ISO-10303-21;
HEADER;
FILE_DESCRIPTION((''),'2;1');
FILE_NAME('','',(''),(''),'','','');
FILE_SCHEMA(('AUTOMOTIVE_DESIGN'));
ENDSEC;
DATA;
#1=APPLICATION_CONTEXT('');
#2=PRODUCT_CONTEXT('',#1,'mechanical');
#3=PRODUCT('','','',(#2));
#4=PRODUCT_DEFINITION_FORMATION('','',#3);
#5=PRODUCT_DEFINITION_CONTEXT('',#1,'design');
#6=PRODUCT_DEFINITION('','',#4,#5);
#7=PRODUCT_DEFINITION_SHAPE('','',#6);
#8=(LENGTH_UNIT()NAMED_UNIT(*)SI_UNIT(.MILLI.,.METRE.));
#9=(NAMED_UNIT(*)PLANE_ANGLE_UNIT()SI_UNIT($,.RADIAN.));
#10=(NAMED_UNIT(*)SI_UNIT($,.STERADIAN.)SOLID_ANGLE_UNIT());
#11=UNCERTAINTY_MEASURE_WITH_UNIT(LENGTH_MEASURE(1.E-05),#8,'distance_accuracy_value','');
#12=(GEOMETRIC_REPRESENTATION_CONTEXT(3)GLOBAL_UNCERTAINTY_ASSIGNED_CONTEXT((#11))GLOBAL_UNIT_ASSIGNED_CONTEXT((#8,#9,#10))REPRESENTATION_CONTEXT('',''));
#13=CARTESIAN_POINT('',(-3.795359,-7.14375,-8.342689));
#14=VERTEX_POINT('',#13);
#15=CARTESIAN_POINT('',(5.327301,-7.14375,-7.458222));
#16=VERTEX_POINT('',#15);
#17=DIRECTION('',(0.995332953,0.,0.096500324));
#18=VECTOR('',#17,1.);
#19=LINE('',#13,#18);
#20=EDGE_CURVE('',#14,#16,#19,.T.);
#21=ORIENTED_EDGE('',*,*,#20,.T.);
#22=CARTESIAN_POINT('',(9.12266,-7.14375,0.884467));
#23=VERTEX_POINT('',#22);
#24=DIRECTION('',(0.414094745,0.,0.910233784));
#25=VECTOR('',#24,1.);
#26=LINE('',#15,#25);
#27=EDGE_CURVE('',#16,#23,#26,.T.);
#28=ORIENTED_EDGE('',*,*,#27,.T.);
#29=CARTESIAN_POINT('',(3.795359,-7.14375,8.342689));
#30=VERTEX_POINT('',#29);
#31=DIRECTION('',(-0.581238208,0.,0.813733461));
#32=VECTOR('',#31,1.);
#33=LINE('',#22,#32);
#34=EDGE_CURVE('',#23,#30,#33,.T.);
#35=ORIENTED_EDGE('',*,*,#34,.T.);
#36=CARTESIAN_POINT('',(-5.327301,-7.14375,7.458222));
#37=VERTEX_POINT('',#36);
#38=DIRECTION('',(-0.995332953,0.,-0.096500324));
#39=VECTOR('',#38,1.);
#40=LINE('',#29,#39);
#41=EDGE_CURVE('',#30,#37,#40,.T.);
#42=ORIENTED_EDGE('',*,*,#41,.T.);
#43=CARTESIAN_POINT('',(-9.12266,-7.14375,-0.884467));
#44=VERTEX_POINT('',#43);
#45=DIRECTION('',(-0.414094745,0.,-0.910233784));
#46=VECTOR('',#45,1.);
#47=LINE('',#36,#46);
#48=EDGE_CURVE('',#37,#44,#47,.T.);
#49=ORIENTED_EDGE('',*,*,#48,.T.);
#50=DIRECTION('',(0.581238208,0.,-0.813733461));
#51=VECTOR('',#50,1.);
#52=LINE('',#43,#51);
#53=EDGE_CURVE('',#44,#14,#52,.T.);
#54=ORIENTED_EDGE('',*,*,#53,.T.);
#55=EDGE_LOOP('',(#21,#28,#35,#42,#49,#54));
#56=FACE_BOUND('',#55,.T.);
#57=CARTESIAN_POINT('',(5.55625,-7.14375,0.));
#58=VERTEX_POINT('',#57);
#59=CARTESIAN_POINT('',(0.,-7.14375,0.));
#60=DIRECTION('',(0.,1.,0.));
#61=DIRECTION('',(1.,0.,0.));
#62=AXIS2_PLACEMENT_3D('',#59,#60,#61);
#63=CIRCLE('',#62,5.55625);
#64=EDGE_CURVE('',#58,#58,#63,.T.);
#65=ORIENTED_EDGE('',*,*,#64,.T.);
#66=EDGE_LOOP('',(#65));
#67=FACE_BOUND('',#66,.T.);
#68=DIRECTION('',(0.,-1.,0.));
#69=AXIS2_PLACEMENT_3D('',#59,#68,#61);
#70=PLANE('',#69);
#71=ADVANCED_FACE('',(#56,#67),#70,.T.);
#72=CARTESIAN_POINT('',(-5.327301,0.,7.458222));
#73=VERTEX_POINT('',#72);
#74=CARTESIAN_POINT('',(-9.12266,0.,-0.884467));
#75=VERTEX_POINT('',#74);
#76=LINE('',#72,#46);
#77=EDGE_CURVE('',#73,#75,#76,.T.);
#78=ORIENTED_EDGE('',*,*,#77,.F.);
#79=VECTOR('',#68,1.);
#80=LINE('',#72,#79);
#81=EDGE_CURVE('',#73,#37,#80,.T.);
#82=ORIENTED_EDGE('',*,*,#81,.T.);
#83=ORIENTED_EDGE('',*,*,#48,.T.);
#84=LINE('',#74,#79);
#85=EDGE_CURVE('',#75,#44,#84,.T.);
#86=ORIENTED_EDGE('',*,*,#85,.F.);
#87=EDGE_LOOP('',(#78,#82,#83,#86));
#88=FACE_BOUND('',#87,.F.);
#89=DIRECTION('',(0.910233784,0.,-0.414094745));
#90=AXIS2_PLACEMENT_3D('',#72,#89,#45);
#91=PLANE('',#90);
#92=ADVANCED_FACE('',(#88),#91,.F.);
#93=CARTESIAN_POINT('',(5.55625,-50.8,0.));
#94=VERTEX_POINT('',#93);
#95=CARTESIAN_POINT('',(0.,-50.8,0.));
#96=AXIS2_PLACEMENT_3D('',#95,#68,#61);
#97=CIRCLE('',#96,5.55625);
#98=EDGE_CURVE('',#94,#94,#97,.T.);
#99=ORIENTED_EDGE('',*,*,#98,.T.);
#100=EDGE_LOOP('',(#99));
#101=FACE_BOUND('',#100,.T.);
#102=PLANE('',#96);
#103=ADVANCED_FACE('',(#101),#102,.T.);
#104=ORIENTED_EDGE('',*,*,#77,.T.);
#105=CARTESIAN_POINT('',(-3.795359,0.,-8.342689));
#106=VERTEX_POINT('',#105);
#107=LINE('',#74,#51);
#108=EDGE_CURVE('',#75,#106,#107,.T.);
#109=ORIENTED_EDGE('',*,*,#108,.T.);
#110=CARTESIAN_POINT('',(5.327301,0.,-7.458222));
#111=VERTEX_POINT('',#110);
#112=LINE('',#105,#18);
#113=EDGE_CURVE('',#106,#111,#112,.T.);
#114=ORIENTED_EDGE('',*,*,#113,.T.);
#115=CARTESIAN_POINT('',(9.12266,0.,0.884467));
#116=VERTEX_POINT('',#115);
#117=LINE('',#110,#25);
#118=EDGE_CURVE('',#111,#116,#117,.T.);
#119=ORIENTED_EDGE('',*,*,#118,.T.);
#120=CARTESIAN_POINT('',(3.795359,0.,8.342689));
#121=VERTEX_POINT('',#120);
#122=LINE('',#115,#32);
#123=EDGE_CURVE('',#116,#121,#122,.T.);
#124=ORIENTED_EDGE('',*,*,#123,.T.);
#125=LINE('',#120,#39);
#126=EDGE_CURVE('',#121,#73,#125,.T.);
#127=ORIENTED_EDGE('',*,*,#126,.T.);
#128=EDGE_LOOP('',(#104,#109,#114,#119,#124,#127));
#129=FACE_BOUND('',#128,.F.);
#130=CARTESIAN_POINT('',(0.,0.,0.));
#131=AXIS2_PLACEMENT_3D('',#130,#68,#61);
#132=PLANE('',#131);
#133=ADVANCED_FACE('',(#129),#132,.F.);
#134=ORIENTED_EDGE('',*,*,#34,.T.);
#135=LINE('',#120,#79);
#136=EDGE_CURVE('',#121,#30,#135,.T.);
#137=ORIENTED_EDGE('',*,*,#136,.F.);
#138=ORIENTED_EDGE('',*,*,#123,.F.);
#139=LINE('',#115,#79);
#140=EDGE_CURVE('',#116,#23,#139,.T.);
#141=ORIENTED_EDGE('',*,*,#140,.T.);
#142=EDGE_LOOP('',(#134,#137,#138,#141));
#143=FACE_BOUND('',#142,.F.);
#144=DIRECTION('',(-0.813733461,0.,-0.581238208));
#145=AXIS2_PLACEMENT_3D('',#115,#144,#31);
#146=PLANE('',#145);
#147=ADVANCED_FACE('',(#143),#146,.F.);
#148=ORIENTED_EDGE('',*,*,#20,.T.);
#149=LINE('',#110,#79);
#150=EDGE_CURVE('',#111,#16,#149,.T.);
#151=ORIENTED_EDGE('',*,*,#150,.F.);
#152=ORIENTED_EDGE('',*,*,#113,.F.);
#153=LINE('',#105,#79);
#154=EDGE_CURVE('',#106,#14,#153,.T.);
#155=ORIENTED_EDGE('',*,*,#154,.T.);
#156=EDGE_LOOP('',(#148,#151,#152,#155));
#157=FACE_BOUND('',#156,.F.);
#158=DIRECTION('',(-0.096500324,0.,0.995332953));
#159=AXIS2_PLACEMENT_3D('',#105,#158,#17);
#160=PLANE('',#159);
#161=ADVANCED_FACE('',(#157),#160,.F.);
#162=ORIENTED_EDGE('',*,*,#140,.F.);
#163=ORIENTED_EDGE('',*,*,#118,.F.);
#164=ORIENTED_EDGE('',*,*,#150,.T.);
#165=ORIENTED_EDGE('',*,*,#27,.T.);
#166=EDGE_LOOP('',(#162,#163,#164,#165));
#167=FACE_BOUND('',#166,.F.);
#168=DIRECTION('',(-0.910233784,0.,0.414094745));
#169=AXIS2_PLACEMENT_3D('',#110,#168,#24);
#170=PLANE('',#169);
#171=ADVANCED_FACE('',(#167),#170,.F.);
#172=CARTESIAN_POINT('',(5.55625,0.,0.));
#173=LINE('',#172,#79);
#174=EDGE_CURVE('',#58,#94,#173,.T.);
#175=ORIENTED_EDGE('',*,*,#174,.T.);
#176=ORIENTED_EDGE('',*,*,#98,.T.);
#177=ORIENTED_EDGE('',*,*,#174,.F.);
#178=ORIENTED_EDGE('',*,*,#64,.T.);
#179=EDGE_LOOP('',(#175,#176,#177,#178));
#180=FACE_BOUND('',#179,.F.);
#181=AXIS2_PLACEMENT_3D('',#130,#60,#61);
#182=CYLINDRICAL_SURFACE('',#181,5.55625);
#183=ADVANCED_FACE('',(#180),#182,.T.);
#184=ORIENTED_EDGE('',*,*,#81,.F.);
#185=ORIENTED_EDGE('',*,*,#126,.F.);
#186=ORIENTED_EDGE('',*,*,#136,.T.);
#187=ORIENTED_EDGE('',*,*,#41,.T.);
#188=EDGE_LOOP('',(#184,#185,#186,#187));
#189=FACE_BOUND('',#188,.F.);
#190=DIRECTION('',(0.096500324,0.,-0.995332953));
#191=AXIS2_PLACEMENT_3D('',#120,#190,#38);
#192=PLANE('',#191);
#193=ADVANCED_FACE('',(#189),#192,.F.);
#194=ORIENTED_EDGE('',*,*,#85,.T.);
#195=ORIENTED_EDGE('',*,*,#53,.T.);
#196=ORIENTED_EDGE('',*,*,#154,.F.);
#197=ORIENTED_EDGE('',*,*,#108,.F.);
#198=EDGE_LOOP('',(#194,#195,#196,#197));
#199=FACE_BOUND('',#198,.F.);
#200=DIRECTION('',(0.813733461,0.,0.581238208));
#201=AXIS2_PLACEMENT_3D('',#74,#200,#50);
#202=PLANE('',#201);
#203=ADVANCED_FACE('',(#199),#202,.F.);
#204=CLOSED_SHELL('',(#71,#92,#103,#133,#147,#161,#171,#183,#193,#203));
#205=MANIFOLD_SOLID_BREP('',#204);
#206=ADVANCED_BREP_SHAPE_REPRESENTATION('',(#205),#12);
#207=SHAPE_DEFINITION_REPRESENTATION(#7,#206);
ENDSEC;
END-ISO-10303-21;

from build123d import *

# Parameters (mm, degrees)
F1_DEPTH = 7.14375
F2_R     = 5.55625
F3_DEPTH = 50.8


# Not quite as in the source:
# - a length typed as a fraction of an inch, garbled in the dataset ("3 / 203.2 mm" for 3/8 in), is restored


with BuildPart() as f1:
    # F0 (on Front) → F1 (new body)
    with BuildSketch(Plane.XZ):
        Polygon((9.122660006, 0.8844674945), (3.795358684, 8.3426890625), (-5.327301322, 7.458221568), (-9.122660006, -0.8844674945), (-3.795358684, -8.3426890625), (5.327301322, -7.458221568), align=None)
    extrude(amount=F1_DEPTH)

    # F2 (on Front) → F3 (join)
    with BuildSketch(Plane.XZ):
        Circle(F2_R)
    extrude(amount=F3_DEPTH)


solid = f1.part
